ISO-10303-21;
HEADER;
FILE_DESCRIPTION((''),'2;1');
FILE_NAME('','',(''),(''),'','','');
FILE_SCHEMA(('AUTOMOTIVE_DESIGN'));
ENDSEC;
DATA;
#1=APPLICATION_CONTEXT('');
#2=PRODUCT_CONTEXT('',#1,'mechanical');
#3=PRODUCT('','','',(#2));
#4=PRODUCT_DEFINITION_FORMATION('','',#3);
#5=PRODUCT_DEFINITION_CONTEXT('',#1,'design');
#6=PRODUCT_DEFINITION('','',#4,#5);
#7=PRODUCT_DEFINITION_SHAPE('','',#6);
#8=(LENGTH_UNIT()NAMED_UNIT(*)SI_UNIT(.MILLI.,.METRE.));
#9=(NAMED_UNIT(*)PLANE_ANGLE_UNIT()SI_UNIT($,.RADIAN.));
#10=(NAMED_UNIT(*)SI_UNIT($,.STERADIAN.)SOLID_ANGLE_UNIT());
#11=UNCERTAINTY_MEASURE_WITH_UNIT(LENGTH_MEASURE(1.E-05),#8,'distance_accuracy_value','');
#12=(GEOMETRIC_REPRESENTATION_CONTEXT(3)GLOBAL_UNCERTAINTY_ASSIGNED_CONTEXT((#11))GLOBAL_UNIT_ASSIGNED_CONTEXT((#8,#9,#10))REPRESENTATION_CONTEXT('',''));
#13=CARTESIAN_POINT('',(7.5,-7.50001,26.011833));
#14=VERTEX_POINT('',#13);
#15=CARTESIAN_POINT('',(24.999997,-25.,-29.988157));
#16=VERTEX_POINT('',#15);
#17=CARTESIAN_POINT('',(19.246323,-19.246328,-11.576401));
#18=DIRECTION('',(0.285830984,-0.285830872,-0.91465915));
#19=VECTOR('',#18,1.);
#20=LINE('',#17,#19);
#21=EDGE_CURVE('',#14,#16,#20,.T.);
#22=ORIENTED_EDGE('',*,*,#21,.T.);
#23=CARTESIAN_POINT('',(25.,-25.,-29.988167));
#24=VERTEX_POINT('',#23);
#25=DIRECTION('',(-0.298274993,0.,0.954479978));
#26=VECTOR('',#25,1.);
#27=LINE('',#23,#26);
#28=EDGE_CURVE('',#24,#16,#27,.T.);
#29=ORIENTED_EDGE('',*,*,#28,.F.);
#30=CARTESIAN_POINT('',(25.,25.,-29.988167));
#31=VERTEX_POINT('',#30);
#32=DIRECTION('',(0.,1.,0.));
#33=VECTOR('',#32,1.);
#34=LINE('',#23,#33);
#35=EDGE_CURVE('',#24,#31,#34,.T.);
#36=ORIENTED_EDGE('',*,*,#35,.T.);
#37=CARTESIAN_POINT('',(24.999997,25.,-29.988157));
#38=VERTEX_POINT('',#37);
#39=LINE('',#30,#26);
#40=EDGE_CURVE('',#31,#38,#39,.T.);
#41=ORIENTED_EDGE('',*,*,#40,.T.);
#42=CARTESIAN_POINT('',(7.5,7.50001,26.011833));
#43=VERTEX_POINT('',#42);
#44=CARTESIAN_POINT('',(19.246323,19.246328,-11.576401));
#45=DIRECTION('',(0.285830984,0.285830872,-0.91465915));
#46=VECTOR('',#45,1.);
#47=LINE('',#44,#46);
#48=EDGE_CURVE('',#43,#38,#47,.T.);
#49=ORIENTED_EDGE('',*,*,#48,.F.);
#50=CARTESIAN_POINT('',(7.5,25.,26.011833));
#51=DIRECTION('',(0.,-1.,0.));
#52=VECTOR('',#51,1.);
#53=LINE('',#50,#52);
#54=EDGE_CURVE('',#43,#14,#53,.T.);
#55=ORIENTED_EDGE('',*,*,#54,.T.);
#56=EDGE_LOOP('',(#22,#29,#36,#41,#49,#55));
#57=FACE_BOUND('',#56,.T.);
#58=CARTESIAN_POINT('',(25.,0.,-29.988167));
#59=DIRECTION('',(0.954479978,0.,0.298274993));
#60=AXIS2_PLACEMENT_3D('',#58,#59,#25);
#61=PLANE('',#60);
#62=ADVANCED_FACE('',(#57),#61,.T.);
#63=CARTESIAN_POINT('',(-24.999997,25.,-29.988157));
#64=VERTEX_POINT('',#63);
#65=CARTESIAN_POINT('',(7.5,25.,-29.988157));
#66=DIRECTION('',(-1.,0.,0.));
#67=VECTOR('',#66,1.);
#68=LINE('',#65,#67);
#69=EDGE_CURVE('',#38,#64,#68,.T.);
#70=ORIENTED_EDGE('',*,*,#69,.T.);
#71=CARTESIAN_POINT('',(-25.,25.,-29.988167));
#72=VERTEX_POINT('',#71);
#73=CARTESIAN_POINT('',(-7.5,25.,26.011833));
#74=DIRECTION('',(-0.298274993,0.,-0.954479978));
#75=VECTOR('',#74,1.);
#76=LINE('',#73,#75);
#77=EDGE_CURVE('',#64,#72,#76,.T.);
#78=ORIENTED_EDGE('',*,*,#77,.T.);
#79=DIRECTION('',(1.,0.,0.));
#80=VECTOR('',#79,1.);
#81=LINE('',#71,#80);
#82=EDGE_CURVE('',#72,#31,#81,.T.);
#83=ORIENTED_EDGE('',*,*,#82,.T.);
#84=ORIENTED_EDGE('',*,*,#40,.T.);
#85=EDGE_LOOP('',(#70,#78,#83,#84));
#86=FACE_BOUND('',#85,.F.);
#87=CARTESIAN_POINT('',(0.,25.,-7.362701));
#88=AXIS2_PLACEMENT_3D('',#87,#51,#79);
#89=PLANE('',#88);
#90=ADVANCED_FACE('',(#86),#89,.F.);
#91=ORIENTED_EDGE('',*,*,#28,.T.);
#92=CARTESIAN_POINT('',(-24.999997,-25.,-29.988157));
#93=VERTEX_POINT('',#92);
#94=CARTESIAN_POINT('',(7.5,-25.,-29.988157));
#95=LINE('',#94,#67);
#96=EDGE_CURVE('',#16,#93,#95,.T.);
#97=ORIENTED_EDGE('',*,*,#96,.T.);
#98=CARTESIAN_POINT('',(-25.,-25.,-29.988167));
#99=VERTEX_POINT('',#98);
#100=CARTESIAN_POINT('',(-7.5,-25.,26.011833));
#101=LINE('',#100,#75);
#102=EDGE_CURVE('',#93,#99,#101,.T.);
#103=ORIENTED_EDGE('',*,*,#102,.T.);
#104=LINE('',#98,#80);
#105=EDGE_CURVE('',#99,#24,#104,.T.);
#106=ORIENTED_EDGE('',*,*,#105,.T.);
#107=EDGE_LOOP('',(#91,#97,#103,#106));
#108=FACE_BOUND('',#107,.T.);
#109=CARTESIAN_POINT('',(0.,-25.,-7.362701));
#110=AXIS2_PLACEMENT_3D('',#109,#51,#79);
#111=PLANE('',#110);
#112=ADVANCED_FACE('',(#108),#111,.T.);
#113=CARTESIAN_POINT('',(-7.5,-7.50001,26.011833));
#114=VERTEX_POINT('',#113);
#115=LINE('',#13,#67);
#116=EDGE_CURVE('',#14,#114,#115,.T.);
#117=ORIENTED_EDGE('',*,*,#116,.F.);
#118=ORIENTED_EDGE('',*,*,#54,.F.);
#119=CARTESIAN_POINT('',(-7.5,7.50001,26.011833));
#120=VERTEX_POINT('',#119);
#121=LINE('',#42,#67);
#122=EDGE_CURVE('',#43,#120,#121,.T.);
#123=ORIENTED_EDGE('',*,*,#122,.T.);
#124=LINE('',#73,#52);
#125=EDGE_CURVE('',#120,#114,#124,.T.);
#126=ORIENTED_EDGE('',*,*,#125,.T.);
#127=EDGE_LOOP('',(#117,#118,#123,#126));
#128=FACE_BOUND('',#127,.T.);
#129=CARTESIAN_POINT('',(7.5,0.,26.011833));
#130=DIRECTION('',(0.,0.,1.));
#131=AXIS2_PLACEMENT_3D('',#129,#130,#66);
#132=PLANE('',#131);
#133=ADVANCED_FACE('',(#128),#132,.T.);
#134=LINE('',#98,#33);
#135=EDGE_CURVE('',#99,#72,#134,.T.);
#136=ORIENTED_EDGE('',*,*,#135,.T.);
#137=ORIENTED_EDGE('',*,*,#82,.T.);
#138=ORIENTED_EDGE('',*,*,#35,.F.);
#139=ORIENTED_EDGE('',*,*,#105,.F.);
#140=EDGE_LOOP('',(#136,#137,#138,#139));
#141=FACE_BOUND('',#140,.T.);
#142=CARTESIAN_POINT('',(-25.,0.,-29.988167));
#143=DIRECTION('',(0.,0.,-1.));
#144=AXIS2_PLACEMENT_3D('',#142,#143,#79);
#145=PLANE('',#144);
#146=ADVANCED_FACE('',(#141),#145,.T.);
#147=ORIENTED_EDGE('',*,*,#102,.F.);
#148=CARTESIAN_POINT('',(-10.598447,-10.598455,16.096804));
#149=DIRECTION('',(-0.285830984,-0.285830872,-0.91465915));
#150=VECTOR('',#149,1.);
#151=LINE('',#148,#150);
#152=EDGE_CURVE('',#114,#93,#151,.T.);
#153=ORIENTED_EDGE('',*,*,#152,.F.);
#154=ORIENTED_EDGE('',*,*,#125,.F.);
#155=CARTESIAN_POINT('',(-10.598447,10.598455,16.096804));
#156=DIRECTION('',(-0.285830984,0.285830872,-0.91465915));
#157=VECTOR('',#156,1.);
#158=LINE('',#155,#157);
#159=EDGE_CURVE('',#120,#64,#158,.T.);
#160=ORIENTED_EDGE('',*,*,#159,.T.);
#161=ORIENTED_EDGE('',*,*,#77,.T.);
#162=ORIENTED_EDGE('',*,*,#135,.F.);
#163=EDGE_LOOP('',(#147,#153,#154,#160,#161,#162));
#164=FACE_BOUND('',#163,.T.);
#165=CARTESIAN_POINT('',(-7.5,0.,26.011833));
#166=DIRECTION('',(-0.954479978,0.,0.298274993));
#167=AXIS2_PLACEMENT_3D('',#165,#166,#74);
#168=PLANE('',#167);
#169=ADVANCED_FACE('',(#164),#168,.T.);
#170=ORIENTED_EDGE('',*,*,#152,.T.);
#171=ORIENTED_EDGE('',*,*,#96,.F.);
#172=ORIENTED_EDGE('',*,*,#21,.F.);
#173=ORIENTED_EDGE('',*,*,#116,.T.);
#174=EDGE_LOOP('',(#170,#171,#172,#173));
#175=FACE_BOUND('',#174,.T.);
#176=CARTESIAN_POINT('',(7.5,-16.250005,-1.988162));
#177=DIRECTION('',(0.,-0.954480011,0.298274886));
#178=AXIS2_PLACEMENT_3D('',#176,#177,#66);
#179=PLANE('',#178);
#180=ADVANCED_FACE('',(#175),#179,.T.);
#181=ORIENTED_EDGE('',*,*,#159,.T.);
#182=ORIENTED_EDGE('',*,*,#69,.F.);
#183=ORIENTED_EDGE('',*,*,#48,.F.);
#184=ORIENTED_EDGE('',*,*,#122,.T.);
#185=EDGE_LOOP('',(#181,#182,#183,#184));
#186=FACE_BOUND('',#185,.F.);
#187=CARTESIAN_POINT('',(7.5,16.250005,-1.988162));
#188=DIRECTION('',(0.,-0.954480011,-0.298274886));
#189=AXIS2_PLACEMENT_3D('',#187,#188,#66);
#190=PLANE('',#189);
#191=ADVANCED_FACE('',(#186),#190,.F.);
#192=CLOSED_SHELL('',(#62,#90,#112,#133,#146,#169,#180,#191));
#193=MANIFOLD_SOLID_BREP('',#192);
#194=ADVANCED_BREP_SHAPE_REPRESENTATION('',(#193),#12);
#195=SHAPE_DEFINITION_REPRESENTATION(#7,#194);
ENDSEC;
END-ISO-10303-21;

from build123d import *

# Parameters (mm, degrees)
F1_DEPTH = 25
F2_SIZE2 = 55.99999
F2_SIZE  = 17.49999


# Not quite as in the source:
# - a fillet or chamfer is up to 0.001 mm smaller than in the source, because OpenCascade refuses the exact size


with BuildPart() as f1:
    # F0 (on Front) → F1 (new body, symmetric)
    with BuildSketch(Plane.XZ):
        Polygon((25, -29.9881670944), (7.5, 26.0118329056), (-7.5, 26.0118329056), (-25, -29.9881670944), align=None)
    extrude(amount=F1_DEPTH, both=True)

    # F2 (size 17.5 and 56 in the source; OpenCascade refuses exactly that, so slightly less here)
    f2_edges = [f1.edges().sort_by_distance(p)[0] for p in [
        (0, 25, 26.011833),
        (0, -25, 26.011833),
    ]]
    f2_side = f1.faces().sort_by_distance((0, 0, 26.011833))[0]
    chamfer(f2_edges, length=F2_SIZE, length2=F2_SIZE2, reference=f2_side)


solid = f1.part
